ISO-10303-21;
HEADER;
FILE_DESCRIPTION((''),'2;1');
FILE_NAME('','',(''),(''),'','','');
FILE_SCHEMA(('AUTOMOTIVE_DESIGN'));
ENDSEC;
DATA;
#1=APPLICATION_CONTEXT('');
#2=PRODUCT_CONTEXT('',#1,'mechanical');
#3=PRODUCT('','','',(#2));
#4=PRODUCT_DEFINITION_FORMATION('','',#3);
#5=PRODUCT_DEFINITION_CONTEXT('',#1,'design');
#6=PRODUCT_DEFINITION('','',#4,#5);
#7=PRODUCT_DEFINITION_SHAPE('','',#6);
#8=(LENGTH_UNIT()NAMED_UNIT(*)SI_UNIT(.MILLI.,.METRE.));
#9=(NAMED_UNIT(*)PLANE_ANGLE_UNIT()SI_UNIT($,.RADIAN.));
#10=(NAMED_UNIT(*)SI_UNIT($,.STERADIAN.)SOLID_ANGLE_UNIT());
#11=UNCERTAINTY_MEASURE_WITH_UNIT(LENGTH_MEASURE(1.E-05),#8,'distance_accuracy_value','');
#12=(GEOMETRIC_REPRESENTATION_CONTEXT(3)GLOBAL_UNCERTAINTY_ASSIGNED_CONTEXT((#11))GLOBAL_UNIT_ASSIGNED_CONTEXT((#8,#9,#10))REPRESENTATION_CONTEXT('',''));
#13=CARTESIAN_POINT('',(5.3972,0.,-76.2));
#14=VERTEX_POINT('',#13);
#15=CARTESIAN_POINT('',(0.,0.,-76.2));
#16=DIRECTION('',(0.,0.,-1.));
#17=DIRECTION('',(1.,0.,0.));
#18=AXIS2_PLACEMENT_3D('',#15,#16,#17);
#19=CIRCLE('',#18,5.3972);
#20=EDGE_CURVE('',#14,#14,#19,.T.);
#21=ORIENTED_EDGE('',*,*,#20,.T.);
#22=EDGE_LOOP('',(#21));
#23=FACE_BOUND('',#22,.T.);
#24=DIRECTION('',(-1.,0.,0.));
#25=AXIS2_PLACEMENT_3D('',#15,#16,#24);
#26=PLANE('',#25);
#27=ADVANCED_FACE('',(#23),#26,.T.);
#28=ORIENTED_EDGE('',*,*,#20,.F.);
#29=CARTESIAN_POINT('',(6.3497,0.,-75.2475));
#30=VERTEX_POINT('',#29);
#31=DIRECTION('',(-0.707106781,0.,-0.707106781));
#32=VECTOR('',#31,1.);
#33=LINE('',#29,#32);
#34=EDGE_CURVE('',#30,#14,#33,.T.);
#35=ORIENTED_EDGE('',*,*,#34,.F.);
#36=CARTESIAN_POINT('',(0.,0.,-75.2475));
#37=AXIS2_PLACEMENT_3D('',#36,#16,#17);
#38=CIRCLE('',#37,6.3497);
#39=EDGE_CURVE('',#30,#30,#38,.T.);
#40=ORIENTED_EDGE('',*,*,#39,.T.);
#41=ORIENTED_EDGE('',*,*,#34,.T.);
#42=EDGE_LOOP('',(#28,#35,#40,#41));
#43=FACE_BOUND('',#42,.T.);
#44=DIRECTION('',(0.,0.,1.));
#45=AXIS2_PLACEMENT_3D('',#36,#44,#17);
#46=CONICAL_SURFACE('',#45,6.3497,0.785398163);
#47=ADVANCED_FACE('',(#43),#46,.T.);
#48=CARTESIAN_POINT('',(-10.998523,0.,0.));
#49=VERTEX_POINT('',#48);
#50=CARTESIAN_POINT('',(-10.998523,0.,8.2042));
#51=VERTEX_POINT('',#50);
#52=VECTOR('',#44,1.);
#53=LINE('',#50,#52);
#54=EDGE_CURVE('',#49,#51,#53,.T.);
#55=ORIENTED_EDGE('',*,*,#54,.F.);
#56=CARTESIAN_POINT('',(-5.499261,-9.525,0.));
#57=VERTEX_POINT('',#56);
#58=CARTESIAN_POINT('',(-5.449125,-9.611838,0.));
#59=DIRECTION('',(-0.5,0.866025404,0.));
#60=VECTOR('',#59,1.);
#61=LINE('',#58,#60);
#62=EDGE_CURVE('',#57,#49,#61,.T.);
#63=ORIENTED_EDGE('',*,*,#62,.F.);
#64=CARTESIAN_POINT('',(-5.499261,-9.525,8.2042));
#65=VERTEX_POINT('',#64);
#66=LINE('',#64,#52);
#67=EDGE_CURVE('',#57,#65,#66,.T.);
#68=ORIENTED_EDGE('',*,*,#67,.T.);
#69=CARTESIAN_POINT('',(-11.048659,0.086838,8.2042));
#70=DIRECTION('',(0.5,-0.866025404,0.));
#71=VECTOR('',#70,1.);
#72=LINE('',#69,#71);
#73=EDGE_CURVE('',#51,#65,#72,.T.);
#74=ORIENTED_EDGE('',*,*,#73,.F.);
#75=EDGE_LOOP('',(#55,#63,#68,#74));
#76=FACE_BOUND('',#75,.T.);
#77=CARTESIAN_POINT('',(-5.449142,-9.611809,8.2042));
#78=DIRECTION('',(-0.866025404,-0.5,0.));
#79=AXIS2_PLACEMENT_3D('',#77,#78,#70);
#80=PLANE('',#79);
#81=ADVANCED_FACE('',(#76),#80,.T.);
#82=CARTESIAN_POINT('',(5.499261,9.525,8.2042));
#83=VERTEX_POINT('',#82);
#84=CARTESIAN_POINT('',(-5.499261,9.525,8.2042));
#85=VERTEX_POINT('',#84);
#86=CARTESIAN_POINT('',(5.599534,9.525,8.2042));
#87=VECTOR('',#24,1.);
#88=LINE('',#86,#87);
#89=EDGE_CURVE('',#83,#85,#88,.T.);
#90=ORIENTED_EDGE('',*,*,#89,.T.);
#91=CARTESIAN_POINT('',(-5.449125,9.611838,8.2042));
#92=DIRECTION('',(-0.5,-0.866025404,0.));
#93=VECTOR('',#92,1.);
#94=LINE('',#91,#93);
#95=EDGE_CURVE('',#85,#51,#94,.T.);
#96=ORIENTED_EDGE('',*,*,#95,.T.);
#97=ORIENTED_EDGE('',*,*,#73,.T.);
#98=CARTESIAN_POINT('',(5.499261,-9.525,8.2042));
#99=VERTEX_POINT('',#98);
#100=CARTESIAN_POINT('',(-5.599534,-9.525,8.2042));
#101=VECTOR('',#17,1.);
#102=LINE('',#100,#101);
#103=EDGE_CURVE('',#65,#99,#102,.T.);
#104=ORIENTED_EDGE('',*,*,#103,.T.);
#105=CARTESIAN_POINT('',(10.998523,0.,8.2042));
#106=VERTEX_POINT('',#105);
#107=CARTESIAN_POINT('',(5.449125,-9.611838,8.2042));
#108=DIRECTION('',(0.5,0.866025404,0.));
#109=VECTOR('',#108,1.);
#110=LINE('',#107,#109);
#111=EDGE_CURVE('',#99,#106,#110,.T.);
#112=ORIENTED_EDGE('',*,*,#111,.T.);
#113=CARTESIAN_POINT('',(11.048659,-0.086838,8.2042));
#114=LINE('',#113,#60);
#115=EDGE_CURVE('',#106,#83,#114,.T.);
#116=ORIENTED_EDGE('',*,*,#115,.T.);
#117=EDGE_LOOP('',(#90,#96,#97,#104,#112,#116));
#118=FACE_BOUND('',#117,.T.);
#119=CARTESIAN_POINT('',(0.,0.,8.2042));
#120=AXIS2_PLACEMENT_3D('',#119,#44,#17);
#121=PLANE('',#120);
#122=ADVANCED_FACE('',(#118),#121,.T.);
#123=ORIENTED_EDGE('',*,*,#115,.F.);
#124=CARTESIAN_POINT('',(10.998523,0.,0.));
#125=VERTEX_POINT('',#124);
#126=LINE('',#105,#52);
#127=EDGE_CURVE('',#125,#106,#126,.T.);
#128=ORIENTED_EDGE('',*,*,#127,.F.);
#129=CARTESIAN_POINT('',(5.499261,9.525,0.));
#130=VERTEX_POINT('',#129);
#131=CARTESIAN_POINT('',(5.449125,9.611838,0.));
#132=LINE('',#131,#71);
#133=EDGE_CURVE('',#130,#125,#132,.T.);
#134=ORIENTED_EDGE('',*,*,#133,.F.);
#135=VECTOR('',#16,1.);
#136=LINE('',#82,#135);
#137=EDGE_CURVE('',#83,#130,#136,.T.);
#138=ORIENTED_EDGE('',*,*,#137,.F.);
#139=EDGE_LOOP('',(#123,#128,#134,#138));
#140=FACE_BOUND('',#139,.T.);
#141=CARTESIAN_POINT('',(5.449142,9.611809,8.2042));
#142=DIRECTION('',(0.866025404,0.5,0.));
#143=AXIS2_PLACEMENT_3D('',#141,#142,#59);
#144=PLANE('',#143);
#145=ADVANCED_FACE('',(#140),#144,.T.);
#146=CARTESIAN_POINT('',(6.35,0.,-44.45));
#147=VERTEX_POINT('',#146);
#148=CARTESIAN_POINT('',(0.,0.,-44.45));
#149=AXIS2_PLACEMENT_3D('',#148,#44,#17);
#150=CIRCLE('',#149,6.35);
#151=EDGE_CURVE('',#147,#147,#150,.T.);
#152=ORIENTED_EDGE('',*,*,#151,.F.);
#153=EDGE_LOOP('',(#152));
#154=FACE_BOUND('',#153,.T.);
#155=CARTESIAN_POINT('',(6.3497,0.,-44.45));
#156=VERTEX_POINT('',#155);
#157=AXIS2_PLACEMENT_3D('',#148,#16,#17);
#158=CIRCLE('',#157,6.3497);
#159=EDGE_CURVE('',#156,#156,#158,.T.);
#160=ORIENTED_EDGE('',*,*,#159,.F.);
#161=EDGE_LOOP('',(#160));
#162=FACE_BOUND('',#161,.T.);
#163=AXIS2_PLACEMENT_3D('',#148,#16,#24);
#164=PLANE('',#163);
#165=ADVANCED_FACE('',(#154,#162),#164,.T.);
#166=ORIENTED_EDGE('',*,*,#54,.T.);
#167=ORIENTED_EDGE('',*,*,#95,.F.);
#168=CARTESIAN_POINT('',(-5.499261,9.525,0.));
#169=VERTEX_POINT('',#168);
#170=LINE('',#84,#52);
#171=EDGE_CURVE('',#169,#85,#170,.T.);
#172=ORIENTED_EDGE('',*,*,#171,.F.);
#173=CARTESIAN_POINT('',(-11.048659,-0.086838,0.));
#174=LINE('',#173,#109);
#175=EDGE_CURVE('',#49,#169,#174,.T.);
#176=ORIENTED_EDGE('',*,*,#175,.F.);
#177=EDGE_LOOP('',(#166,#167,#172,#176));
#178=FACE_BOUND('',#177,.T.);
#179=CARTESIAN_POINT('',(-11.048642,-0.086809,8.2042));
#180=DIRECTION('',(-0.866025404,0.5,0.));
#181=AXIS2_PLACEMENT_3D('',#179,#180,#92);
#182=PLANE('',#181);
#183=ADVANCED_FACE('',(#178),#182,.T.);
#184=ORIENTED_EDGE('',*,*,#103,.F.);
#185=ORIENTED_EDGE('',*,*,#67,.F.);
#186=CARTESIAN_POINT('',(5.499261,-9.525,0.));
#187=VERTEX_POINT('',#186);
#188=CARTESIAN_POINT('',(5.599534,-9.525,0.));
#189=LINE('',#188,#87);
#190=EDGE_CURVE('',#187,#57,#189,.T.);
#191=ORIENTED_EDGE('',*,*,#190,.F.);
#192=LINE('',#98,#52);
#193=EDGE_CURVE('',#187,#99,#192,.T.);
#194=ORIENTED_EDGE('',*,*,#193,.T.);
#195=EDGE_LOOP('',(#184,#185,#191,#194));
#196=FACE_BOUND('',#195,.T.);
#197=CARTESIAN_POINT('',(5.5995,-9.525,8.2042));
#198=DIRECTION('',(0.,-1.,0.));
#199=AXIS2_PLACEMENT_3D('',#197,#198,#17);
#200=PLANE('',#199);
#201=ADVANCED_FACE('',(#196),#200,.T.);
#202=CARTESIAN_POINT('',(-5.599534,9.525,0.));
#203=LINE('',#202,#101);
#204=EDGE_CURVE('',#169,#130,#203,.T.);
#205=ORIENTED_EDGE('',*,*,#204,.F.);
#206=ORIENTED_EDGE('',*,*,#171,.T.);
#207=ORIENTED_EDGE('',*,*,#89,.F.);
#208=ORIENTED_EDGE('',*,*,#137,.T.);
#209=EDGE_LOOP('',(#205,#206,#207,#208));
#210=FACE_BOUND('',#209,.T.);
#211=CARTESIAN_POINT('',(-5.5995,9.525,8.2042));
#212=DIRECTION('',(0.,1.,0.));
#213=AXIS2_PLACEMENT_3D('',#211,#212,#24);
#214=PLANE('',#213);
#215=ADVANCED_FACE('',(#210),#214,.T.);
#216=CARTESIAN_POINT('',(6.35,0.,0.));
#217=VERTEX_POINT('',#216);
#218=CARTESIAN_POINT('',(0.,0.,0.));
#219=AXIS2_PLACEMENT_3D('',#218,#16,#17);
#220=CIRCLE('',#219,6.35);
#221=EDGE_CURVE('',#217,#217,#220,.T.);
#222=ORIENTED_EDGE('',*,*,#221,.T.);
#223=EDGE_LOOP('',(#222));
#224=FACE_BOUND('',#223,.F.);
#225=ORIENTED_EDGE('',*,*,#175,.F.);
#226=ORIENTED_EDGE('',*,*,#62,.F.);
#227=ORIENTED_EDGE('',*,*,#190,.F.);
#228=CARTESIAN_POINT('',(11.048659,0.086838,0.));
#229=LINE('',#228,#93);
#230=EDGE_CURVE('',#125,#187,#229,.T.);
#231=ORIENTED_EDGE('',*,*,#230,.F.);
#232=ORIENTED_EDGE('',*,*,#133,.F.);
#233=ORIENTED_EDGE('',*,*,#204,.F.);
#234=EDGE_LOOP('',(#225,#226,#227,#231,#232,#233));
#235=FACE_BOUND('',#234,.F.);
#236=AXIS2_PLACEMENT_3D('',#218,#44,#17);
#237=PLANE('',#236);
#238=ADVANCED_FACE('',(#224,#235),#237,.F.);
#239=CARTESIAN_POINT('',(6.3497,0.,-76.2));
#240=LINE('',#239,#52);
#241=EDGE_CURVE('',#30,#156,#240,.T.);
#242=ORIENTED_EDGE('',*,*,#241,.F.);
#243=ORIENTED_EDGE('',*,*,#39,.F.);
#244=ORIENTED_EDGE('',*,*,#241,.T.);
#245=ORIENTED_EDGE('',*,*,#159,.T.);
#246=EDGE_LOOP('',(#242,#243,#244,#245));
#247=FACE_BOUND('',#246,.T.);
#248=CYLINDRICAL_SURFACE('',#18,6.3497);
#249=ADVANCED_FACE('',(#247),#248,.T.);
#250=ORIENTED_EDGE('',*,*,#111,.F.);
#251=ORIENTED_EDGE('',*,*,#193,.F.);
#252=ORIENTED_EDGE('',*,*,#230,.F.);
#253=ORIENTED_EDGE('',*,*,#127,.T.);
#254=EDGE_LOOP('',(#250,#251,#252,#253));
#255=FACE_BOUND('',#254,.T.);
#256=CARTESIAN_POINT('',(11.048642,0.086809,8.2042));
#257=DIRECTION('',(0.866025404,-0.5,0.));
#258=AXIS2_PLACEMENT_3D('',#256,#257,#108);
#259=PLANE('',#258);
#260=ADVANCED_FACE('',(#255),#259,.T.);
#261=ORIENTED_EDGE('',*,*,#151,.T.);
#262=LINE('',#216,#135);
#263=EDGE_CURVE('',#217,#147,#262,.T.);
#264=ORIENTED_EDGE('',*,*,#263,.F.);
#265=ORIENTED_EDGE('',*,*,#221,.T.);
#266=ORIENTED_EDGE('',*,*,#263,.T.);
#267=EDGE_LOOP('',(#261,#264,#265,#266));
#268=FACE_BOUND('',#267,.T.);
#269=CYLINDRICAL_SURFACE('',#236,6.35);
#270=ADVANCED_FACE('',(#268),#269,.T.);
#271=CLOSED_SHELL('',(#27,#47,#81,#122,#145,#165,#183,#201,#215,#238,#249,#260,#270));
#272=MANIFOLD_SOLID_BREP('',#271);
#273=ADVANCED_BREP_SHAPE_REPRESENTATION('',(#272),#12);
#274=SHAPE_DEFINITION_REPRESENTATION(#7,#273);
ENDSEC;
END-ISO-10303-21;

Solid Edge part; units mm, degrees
sketch "Sketch1" plane through (0, 0, 0) normal (0, 0, 1) x (1, 0, 0)
  circle A0 centre (0, 0) radius 11.049
  dimension "D1" = 22.098
extrude "Protrusion1" add sketch "Sketch1" along normal blind 8.2042
sketch "Sketch2" plane through (0, 0, 0) normal (0, 0, -1) x (1, 0, 0)
  circle A0 centre (0, 0) radius 6.35
extrude "Protrusion2" add sketch "Sketch2" along normal blind 76.2
sketch "Sketch3" plane through (0, 0, -76.2) normal (0, 0, -1) x (1, 0, 0)
  circle A0 centre (0, 0) radius 6.3497
extrude "Cutout1" cut sketch "Sketch3" against normal blind 31.75 flip side to cut
chamfer "Chamfer_1" distance 0.9525 angle 45 1 edges at (-6.3497, 0, -76.2)
sketch "Sketch4" plane through (0, 0, 8.2042) normal (0, 0, 1) x (1, 0, 0)
  line L0 (-5.5995, 9.525) -> (5.5995, 9.525)
  dimension "D1" = 19.05
extrude "Cutout2" cut sketch "Sketch4" against normal up to next material side at (0, 9.575, 8.2042)
pattern_circular "Pattern1" count 6 over 360 about axis through (0, 0, 8.2042) along (0, 0, 1) of "Cutout2"
properties part number "24104419"
